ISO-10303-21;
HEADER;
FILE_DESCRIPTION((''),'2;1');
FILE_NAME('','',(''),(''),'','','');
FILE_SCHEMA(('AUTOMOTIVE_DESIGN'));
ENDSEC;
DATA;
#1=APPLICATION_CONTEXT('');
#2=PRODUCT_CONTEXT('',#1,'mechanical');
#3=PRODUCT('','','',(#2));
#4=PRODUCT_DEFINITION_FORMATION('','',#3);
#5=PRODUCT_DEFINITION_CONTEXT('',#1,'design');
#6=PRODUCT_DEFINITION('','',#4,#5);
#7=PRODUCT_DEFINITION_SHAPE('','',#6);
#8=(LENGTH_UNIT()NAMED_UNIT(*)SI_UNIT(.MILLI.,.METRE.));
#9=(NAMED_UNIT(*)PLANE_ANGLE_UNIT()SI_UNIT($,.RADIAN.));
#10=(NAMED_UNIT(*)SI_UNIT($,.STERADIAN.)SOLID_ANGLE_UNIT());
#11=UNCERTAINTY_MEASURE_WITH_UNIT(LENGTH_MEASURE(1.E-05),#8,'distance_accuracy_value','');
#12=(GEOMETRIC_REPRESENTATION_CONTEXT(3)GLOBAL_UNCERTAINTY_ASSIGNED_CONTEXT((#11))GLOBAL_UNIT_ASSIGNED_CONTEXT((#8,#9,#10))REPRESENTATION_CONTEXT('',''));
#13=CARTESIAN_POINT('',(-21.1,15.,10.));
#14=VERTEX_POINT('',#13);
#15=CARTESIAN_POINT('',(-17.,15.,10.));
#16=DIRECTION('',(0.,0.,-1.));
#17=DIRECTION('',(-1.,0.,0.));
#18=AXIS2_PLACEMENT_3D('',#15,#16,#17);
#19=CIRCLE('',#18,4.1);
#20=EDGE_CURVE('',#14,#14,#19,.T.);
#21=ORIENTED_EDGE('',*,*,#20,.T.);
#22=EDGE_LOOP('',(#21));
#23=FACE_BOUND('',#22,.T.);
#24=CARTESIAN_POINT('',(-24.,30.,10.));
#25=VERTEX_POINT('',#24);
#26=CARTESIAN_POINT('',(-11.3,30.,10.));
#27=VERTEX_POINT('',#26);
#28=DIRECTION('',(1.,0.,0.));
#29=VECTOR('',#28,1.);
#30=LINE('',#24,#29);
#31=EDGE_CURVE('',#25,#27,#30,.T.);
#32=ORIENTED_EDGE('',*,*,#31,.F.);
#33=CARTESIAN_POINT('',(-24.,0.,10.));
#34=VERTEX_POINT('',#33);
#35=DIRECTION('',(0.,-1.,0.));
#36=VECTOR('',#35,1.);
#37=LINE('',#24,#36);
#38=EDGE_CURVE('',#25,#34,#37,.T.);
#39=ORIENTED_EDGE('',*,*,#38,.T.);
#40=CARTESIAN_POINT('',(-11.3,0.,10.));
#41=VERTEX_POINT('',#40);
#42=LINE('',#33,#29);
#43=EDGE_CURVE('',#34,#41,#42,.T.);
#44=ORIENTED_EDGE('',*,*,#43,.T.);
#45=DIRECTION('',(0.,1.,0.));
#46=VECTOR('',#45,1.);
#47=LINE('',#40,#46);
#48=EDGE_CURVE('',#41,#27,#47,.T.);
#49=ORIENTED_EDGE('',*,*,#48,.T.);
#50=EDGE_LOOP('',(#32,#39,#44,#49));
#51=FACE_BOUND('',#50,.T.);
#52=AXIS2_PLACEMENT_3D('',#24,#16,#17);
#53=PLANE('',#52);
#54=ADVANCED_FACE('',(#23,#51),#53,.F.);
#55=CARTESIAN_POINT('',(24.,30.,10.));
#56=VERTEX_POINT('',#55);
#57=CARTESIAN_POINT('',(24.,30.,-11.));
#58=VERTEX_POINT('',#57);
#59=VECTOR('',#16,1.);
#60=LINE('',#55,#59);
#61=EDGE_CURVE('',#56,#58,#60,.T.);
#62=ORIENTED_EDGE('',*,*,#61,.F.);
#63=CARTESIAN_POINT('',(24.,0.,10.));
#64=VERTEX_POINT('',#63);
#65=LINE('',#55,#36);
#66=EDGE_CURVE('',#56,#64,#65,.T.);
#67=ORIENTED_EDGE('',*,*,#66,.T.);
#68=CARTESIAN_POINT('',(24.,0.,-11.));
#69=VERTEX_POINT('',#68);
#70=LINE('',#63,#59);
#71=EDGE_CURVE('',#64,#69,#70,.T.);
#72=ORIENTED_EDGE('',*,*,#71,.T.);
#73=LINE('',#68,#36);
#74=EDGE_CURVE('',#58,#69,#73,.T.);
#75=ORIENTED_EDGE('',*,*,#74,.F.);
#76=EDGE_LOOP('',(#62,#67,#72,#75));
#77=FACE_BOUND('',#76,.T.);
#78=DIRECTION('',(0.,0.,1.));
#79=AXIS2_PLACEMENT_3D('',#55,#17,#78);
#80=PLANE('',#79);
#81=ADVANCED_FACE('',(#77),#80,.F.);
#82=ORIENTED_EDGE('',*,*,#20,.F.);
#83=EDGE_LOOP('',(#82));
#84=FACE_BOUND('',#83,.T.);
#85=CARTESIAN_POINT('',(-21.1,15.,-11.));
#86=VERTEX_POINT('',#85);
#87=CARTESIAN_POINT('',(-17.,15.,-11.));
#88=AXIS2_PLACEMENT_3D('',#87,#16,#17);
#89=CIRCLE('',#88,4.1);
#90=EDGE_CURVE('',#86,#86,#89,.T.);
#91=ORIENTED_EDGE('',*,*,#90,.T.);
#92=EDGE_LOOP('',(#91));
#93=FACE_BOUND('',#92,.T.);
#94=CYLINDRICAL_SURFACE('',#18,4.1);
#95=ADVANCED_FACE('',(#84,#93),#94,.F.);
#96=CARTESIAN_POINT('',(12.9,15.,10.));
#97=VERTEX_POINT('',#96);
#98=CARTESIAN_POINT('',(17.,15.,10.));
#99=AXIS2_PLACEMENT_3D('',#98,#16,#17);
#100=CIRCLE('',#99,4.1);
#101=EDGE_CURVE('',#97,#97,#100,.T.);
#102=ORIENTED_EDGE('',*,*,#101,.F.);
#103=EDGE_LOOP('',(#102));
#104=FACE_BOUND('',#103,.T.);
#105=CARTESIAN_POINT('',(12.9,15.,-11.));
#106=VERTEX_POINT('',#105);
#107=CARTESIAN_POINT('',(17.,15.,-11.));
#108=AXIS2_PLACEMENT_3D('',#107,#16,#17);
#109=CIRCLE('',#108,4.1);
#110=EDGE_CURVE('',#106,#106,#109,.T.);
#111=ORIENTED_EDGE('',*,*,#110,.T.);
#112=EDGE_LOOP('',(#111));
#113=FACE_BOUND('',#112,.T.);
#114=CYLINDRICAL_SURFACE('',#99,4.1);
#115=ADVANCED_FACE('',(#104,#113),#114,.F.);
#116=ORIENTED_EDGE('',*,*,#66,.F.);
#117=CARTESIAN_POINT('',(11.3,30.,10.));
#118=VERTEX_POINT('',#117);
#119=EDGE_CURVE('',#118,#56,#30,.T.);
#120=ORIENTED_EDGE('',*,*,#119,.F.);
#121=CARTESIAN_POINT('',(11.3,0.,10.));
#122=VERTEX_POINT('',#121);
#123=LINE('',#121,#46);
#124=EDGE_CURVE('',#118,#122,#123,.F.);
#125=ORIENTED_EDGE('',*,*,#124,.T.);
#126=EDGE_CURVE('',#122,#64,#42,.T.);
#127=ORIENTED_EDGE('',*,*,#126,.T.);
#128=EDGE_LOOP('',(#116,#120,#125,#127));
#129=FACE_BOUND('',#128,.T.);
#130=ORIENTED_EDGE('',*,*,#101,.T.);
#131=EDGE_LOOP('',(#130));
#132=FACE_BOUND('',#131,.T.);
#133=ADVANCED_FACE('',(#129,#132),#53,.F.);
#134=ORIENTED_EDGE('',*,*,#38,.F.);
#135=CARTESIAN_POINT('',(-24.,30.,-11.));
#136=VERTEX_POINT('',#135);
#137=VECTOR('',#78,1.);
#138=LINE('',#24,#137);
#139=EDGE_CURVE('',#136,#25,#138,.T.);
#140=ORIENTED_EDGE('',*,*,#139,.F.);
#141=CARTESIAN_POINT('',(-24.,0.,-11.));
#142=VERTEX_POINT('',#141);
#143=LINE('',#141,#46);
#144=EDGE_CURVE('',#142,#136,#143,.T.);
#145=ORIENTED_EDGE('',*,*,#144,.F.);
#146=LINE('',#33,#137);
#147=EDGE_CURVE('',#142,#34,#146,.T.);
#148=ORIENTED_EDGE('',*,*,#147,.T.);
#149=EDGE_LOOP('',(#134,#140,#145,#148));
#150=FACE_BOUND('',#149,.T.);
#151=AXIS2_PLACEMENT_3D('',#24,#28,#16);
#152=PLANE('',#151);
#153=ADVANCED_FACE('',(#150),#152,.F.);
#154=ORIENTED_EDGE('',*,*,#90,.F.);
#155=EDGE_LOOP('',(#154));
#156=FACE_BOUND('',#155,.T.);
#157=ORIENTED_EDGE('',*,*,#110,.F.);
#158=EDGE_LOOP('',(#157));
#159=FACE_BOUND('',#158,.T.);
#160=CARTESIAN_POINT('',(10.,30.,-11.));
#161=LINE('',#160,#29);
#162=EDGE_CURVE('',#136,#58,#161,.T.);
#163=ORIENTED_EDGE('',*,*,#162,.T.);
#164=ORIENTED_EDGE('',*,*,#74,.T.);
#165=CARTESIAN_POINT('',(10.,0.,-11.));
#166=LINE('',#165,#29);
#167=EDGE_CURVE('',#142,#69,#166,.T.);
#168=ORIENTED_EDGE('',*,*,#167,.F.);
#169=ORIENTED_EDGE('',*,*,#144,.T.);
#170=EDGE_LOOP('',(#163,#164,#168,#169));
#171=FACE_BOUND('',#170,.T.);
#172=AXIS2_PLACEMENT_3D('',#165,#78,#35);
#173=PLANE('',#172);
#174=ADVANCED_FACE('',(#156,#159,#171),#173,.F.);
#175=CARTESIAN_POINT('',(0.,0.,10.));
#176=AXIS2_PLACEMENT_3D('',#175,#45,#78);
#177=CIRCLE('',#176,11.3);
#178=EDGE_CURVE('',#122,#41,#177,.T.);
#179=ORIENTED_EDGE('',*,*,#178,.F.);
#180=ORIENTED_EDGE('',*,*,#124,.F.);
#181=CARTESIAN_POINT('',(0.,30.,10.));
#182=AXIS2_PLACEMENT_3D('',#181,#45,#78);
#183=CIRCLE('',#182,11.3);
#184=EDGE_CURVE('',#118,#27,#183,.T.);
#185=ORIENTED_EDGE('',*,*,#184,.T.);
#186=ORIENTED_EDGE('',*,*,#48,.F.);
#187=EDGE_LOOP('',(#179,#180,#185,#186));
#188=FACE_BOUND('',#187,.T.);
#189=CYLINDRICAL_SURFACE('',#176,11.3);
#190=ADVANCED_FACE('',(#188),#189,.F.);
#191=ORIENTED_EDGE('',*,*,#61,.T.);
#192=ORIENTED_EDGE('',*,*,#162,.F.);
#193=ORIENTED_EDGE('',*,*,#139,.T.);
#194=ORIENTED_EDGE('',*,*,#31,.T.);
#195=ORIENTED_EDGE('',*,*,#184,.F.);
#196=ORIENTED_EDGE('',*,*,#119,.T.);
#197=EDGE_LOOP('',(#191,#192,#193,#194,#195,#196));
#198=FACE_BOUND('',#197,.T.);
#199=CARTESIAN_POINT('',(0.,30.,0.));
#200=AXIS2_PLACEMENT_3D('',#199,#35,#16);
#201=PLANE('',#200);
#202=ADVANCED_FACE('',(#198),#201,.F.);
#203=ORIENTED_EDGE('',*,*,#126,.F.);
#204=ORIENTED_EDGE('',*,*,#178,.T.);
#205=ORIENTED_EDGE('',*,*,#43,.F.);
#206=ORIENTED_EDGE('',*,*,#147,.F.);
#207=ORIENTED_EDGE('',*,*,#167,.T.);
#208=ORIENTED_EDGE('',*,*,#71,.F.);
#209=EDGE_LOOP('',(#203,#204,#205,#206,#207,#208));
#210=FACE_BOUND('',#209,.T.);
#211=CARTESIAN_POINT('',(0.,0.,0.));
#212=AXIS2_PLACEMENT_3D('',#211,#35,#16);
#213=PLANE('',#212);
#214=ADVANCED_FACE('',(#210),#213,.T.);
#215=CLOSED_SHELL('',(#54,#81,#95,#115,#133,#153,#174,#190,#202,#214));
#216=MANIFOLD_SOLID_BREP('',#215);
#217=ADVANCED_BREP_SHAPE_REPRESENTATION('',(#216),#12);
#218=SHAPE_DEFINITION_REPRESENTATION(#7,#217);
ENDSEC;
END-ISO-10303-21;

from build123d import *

# Parameters (mm, degrees)
SKETCH_1_W          = 48
SKETCH_1_H          = 20
EXTRUDE_1_DEPTH     = 30
SKETCH_2_W          = 14
SKETCH_2_H          = 30
CUT_EXTRUDE_1_DEPTH = 7
SKETCH_7_W          = 22
SKETCH_7_H          = 30
EXTRUDE_2_DEPTH     = 48
SKETCH_8_W          = 21
SKETCH_8_H          = 30
CUT_EXTRUDE_2_DEPTH = 14
SKETCH_9_W          = 21
SKETCH_9_H          = 30
CUT_EXTRUDE_3_DEPTH = 14
SKETCH_11_W         = 10.2
SKETCH_11_H         = 20.2
CUT_EXTRUDE_4_DEPTH = 56.497747702
SKETCH_13_R         = 4.1
CUT_EXTRUDE_5_DEPTH = 44.783558558
FILLET_1_R          = 7
SKETCH1_W           = 10.2
SKETCH1_H           = 20.2
BOSS_EXTRUDE1_DEPTH = 4
SKETCH2_W           = 20
SKETCH2_H           = 21
CUT_EXTRUDE1_DEPTH  = 51
SKETCH3_R           = 11.3
CUT_EXTRUDE2_DEPTH  = 40.962482405


with BuildPart() as part:
    # Эскиз1 → Бобышка-Вытянуть1 (new body)
    with BuildSketch(Plane(origin=(0, 0, 0), x_dir=(1, 0, 0), z_dir=(0, 1, 0))):
        Rectangle(SKETCH_1_W, SKETCH_1_H)
    extrude(amount=EXTRUDE_1_DEPTH)

    # Эскиз2 → Вырез-Вытянуть1 (cut)
    with BuildSketch(Plane.XY.offset(10)):
        with Locations((0, 15)):
            Rectangle(SKETCH_2_W, SKETCH_2_H)
    extrude(amount=-CUT_EXTRUDE_1_DEPTH, mode=Mode.SUBTRACT)

    # Эскиз7 → Бобышка-Вытянуть2 (add)
    with BuildSketch(Plane(origin=(24, 0, 0), x_dir=(0, 0, -1), z_dir=(1, 0, 0))):
        with Locations((21, 15)):
            Rectangle(SKETCH_7_W, SKETCH_7_H)
    extrude(amount=-EXTRUDE_2_DEPTH)

    # Эскиз8 → Вырез-Вытянуть2 (cut)
    with BuildSketch(Plane(origin=(24, 0, 0), x_dir=(0, 0, -1), z_dir=(1, 0, 0))):
        with Locations((21.5, 15)):
            Rectangle(SKETCH_8_W, SKETCH_8_H)
    extrude(amount=-CUT_EXTRUDE_2_DEPTH, mode=Mode.SUBTRACT)

    # Эскиз9 → Вырез-Вытянуть3 (cut)
    with BuildSketch(Plane.ZY.offset(24)):
        with Locations((-21.5, 15)):
            Rectangle(SKETCH_9_W, SKETCH_9_H)
    extrude(amount=-CUT_EXTRUDE_3_DEPTH, mode=Mode.SUBTRACT)

    # Эскиз11 → Вырез-Вытянуть4 (cut, through all)
    with BuildSketch(Plane.ZY.offset(10)):
        with Locations((-21.5, 15)):
            Rectangle(SKETCH_11_W, SKETCH_11_H)
    extrude(amount=-CUT_EXTRUDE_4_DEPTH, mode=Mode.SUBTRACT)

    # Эскиз13 → Вырез-Вытянуть5 (cut, through all)
    with BuildSketch(Plane(origin=(0, 0, -11), x_dir=(-1, 0, 0), z_dir=(0, 0, -1))):
        with Locations((17, 15)):
            Circle(SKETCH_13_R)
        with Locations((-17, 15)):
            Circle(SKETCH_13_R)
    extrude(amount=-CUT_EXTRUDE_5_DEPTH, mode=Mode.SUBTRACT)

    # Скругление1
    fillet_1_edges = [part.edges().sort_by_distance(p)[0] for p in [
        (-7, 15, 3),
        (7, 15, 3),
    ]]
    fillet(fillet_1_edges, radius=FILLET_1_R - 0.0001)  # a hair under: the kernel refuses the full size

    # Sketch1 → Boss-Extrude1 (add)
    with BuildSketch(Plane(origin=(10, 0, 0), x_dir=(0, 0, -1), z_dir=(1, 0, 0))):
        with Locations((21.5, 15)):
            Rectangle(SKETCH1_W, SKETCH1_H)
    extrude(amount=-BOSS_EXTRUDE1_DEPTH)

    # Sketch2 → Cut-Extrude1 (cut, through all)
    with BuildSketch(Plane(origin=(0, 30, 0), x_dir=(1, 0, 0), z_dir=(0, 1, 0))):
        with Locations((0, 21.5)):
            Rectangle(SKETCH2_W, SKETCH2_H)
    extrude(amount=-CUT_EXTRUDE1_DEPTH, mode=Mode.SUBTRACT)

    # Sketch3 → Cut-Extrude2 (cut, through all)
    with BuildSketch(Plane(origin=(0, 30, 0), x_dir=(1, 0, 0), z_dir=(0, 1, 0))):
        with Locations((0, -10)):
            Circle(SKETCH3_R)
    extrude(amount=-CUT_EXTRUDE2_DEPTH, mode=Mode.SUBTRACT)


solid = part.part
